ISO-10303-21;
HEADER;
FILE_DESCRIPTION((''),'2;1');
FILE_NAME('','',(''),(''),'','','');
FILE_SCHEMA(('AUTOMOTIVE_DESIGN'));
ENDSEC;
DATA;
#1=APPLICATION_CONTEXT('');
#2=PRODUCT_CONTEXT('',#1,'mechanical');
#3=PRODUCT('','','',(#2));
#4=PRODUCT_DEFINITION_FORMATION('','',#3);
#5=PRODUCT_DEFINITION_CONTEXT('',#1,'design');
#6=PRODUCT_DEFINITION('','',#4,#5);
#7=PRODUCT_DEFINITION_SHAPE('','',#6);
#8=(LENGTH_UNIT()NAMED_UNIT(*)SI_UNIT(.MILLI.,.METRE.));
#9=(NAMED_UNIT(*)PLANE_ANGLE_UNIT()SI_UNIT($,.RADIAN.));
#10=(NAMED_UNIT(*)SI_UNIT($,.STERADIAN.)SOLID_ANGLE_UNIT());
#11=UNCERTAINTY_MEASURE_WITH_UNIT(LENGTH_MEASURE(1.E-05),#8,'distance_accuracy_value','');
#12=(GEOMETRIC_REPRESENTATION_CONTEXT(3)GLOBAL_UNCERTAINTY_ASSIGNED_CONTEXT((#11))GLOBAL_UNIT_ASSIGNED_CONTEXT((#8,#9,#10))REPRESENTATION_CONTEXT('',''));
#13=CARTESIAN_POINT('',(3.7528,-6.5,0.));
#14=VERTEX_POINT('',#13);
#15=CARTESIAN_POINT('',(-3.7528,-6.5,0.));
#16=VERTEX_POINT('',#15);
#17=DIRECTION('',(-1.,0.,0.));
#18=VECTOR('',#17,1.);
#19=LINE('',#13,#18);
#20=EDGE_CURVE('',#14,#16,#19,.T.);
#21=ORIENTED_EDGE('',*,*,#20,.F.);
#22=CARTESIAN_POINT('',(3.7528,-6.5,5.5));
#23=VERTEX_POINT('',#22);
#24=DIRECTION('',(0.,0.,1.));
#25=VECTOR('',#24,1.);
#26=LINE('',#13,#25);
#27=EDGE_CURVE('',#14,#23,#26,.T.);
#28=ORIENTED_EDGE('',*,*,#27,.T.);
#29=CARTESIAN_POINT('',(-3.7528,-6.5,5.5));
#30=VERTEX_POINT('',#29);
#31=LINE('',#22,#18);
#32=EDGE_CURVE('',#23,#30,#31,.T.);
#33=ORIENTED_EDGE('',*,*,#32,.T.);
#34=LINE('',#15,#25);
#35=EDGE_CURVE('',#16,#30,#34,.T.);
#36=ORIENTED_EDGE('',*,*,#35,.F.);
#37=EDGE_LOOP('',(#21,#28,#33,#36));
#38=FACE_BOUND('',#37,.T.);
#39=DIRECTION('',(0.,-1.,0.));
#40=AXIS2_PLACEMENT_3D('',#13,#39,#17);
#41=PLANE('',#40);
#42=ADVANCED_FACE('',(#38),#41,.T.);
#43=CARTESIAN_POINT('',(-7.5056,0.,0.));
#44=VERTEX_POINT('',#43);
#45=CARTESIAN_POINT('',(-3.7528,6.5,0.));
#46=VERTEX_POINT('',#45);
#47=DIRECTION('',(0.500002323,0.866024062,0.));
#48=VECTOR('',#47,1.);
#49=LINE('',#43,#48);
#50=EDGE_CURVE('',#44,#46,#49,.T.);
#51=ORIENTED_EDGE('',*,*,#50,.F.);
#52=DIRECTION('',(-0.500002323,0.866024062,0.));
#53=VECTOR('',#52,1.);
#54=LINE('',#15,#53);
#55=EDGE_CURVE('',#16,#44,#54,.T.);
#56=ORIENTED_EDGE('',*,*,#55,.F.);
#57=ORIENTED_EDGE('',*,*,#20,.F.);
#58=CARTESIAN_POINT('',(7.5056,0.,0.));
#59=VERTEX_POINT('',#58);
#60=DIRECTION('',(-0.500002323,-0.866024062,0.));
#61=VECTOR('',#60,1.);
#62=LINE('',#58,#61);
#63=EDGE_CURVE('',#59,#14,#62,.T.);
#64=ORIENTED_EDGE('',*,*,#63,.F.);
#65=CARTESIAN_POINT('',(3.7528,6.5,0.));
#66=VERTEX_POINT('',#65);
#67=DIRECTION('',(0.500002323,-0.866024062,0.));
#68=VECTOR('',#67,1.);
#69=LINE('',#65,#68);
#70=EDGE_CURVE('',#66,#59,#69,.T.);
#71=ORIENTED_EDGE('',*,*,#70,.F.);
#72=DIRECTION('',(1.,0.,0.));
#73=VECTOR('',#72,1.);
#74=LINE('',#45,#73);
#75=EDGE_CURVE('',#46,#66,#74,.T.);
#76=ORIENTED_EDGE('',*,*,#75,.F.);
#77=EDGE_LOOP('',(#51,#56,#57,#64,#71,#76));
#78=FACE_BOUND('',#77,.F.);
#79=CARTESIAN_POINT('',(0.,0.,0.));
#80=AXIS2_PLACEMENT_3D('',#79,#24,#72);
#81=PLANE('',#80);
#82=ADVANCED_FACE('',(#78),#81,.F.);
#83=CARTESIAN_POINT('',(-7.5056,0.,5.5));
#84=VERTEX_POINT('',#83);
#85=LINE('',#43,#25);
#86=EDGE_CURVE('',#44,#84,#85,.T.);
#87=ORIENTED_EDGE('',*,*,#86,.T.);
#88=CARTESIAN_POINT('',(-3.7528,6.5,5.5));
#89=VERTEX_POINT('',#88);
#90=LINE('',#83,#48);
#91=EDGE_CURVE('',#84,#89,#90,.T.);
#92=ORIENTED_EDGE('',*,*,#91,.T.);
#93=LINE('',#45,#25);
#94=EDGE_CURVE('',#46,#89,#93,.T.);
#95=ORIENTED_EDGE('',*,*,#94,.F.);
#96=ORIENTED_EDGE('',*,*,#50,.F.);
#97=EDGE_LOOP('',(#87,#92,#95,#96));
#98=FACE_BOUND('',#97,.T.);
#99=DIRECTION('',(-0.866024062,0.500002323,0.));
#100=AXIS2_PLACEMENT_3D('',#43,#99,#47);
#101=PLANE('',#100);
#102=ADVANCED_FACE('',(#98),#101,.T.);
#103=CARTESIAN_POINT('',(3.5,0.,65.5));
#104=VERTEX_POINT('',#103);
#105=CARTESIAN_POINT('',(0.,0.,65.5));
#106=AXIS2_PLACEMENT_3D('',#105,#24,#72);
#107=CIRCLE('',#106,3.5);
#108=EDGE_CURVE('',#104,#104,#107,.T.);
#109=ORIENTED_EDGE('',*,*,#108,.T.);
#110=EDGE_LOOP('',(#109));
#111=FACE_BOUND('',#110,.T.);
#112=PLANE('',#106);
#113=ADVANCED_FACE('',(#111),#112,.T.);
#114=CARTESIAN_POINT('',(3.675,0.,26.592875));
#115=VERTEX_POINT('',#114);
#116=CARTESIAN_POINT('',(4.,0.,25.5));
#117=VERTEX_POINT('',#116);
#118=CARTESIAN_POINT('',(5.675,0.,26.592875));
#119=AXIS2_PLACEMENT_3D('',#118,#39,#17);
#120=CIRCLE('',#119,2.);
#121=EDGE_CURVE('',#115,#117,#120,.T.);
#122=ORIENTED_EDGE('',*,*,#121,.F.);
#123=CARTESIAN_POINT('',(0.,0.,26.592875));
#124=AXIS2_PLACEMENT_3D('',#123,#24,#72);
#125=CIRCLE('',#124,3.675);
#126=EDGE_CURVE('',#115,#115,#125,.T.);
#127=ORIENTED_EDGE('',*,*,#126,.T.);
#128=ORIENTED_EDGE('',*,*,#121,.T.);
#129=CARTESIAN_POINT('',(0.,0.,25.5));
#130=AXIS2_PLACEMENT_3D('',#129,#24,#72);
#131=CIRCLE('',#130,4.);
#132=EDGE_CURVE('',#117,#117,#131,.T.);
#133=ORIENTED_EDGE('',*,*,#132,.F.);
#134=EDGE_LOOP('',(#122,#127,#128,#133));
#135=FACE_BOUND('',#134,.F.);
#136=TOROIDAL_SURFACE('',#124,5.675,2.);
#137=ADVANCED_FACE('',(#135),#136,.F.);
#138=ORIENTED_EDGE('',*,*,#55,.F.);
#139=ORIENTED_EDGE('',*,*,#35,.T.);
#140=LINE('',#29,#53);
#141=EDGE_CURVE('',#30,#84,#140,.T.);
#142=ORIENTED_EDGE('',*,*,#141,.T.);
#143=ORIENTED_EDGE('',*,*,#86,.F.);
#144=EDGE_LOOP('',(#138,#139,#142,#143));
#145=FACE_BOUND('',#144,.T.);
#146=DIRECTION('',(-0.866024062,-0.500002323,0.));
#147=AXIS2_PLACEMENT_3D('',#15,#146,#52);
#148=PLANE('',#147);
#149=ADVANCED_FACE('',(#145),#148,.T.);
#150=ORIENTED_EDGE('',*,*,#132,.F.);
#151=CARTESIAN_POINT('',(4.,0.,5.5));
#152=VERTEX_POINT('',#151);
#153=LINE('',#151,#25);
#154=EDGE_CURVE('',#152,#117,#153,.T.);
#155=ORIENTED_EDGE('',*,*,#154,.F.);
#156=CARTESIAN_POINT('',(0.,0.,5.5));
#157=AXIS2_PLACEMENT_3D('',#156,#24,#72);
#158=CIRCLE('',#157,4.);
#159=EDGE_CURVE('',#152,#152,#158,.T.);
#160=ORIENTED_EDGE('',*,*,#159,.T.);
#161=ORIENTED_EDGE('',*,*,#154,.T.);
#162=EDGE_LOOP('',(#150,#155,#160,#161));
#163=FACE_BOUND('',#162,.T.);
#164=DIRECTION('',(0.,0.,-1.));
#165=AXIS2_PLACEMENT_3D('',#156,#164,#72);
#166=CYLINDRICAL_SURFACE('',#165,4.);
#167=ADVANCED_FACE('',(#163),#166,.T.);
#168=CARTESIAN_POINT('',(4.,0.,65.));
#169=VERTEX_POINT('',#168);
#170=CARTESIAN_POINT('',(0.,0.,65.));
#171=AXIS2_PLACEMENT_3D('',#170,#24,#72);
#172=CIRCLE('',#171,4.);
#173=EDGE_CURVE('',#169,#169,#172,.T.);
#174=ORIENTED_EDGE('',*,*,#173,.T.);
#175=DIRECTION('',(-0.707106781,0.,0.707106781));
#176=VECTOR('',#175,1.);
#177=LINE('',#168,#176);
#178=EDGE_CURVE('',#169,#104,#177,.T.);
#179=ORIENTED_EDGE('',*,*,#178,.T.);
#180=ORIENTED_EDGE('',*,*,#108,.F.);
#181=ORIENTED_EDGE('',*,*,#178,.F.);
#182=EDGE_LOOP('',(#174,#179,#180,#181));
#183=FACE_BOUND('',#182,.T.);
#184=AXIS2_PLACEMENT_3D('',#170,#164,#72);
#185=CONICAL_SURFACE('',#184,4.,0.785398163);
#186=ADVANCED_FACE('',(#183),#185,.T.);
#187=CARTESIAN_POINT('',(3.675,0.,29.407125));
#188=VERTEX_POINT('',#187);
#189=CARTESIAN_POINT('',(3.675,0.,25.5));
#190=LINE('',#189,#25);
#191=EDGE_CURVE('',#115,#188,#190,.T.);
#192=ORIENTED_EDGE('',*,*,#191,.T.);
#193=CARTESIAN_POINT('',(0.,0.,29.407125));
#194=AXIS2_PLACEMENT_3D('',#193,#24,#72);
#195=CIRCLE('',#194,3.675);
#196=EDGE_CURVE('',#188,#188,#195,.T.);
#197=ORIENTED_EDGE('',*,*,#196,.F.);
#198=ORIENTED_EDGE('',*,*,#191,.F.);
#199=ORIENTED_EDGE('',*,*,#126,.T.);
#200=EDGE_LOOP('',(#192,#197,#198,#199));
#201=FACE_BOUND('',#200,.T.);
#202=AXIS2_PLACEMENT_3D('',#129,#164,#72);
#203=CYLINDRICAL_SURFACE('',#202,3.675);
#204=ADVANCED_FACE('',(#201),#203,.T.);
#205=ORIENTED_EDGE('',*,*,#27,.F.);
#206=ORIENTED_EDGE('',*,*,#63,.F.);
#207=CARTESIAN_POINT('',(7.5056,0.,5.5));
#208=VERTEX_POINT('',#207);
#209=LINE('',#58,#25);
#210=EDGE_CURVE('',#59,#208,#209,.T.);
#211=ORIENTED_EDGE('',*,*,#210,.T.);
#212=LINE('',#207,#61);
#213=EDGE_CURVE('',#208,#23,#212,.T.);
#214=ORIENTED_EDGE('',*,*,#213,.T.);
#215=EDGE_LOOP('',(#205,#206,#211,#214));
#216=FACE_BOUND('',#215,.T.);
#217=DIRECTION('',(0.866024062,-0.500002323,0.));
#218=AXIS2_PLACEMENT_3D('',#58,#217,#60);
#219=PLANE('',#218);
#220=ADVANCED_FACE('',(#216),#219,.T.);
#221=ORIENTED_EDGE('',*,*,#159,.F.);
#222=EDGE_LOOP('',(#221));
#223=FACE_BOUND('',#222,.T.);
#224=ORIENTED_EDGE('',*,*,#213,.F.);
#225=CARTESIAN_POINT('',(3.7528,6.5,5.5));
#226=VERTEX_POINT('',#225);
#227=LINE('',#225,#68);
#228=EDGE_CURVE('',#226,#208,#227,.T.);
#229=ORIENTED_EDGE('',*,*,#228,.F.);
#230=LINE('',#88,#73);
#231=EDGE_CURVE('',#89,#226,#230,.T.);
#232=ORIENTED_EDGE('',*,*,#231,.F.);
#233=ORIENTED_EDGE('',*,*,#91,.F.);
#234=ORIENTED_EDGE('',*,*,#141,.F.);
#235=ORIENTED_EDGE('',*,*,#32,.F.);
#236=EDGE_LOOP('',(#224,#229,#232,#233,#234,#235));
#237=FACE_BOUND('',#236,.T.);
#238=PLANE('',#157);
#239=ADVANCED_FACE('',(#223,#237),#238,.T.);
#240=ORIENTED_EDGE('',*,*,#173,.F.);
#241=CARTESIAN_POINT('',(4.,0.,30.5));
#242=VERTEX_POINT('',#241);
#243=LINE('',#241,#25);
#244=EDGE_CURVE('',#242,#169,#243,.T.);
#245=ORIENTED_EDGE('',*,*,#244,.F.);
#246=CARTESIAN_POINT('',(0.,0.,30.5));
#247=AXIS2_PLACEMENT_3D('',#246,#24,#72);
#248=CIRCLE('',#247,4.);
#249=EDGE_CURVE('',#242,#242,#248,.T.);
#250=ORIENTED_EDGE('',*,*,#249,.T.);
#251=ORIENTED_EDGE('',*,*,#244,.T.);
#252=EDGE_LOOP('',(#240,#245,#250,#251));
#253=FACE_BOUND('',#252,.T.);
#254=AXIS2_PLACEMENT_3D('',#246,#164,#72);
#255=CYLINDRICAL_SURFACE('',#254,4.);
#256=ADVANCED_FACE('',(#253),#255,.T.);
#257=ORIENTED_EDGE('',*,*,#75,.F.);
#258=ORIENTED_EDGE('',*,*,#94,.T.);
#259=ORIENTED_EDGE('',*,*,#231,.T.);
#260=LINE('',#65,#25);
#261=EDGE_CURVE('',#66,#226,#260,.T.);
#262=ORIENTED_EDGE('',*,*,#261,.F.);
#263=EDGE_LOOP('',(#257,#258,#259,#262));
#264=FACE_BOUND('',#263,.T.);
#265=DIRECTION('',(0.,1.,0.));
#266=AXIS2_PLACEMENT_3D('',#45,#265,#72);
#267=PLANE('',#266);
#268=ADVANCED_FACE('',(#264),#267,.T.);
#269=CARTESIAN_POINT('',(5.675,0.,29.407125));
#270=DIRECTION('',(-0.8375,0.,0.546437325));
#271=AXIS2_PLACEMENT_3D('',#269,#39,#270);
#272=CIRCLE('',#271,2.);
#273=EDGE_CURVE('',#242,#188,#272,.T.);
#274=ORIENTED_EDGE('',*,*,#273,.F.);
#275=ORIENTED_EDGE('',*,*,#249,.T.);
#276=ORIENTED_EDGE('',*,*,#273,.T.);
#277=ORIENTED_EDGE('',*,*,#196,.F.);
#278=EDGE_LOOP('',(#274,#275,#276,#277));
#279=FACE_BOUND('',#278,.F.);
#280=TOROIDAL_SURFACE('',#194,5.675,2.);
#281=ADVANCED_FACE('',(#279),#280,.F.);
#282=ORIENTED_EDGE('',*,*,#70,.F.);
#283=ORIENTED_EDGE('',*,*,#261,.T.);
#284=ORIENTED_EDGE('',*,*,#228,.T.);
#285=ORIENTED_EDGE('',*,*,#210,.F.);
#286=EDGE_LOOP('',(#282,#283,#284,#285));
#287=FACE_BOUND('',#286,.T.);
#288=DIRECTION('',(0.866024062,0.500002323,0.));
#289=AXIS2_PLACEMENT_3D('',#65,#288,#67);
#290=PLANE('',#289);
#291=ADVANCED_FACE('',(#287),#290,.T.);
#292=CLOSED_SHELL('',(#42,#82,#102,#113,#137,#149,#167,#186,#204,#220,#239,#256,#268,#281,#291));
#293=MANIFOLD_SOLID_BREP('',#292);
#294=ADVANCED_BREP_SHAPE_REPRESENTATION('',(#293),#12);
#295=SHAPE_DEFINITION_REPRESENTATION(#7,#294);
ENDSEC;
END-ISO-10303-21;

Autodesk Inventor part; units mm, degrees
ref_plane "YZ Plane" through (0, 0, 0) normal (1, 0, 0) x (0, 1, 0)
ref_plane "XZ Plane" through (0, 0, 0) normal (0, 1, 0) x (-1, 0, 0)
ref_plane "XY Plane" through (0, 0, 0) normal (0, 0, 1) x (1, 0, 0)
sketch "Szkic1" plane through (0, 0, 0) normal (0, 0, 1) x (1, 0, 0)
  line L0 (3.7528, 6.5) -> (7.5056, 0)
  line L1 (7.5056, 0) -> (3.7528, -6.5)
  line L2 (3.7528, -6.5) -> (-3.7528, -6.5)
  line L3 (-3.7528, -6.5) -> (-7.5056, 0)
  line L4 (-7.5056, 0) -> (-3.7528, 6.5)
  line L5 (-3.7528, 6.5) -> (3.7528, 6.5)
  point P0 (0, 0)
  point P1 (0, 0)
  point P2 (0, 6.5)
extrude "Wyciągnięcie proste1" add sketch "Szkic1" along normal blind 5.5
sketch "Szkic2" plane through (0, 0, 5.5) normal (0, 0, 1) x (1, 0, 0)
  circle A0 centre (0, 0) radius 4
  dimension "d3" = 8
extrude "Wyciągnięcie proste2" add sketch "Szkic2" along normal blind 20
sketch "Szkic3" plane through (0, 0, 25.5) normal (0, 0, 1) x (1, 0, 0)
  circle A0 centre (0, 0) radius 4 projected
  circle A1 centre (0, 0) radius 3.675
  dimension "d6" = 7.35
extrude "Wyciągnięcie proste3" add sketch "Szkic3" along normal blind 5 contours A1
sketch "Szkic4" plane through (0, 0, 30.5) normal (0, 0, 1) x (1, 0, 0)
  circle A0 centre (0, 0) radius 4 projected
extrude "Wyciągnięcie proste4" add sketch "Szkic4" along normal blind 35
thread "Gwint1" size "M8x1.25" class "6g" standard "ANSI Metric M Profile" length 25 offset 10
fillet "Zaokrąglenie1" radius 2 2 edges at (-3.675, 0, 25.5) (-3.675, 0, 30.5)
chamfer "Faza1" distance 0.5 angle 45 1 edges at (-4, 0, 65.5)
properties part number "COTS_GENERIC_M8_Hobbed_Bolt"
